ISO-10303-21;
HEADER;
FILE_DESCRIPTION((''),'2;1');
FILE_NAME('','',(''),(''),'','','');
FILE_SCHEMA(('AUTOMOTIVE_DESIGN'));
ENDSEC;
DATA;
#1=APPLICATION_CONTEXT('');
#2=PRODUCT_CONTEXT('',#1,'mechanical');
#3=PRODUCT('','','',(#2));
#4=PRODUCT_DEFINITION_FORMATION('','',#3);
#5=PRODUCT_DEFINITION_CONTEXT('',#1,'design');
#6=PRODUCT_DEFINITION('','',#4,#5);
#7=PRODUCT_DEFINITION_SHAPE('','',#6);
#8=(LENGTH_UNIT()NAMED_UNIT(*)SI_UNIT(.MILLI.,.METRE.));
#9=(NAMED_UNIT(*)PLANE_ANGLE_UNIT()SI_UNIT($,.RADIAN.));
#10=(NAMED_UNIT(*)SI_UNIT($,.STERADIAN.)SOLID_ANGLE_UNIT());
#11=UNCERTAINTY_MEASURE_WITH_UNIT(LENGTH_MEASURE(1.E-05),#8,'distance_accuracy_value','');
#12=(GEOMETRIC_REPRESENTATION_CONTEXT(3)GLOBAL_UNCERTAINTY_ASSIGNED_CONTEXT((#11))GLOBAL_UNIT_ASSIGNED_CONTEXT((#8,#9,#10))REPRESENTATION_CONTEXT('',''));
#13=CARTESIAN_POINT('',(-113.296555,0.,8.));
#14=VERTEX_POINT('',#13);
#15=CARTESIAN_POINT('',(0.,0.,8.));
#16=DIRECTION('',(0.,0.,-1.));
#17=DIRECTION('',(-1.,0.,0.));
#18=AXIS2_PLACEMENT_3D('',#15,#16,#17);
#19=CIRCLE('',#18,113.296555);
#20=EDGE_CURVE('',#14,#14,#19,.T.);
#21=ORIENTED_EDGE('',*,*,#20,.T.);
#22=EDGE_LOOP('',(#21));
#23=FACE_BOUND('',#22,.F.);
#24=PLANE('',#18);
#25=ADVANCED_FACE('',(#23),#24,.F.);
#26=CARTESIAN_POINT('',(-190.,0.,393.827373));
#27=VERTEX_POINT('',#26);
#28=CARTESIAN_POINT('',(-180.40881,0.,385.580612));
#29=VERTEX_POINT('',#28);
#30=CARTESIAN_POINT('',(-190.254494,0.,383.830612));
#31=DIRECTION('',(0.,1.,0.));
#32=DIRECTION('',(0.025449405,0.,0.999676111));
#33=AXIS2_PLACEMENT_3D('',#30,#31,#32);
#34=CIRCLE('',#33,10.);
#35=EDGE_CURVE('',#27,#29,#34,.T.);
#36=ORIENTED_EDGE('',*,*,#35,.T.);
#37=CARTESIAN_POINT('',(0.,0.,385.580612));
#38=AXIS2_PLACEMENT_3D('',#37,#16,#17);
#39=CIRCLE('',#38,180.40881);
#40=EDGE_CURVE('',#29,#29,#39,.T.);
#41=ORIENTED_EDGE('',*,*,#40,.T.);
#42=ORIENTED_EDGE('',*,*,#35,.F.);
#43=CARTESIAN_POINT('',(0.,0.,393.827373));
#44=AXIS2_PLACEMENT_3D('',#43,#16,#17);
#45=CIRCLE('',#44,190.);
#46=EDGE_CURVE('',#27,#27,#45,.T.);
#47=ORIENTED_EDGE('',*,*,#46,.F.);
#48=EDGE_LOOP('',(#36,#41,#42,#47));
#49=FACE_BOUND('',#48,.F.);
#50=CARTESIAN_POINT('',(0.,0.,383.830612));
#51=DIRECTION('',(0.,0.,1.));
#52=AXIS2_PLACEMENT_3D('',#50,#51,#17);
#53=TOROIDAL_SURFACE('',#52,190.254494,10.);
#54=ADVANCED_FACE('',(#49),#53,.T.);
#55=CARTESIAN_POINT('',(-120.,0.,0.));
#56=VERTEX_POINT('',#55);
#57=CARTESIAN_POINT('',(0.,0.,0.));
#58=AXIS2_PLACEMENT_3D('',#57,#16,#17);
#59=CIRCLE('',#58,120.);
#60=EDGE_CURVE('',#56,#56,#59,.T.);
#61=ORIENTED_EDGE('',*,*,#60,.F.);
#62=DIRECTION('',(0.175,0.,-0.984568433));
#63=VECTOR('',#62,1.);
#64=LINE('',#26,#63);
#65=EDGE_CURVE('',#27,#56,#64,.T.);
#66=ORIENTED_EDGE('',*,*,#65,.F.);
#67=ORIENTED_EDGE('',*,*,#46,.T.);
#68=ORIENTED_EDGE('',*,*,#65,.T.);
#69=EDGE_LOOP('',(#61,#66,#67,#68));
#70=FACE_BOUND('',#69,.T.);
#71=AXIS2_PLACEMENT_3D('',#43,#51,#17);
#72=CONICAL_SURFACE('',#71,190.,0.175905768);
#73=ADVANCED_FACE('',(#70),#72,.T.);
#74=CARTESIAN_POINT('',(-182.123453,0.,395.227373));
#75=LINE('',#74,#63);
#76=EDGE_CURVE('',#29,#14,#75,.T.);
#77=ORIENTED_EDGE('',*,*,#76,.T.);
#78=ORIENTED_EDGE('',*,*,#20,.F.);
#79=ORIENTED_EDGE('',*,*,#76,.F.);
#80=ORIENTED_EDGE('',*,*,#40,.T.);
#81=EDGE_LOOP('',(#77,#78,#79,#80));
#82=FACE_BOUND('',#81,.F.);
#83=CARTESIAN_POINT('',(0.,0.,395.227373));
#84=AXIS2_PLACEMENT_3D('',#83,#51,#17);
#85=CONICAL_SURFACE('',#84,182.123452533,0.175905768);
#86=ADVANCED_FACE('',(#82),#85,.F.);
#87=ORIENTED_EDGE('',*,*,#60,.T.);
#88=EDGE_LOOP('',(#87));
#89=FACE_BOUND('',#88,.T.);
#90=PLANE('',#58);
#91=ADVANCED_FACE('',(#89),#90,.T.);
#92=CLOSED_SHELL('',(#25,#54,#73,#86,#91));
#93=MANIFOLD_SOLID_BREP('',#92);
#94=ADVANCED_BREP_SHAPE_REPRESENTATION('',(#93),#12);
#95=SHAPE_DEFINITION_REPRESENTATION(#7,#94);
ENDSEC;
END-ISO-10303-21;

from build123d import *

# Parameters (mm, degrees)
F2_T = -8


# Not quite as in the source:
# - a fillet or chamfer that OpenCascade refuses, or shapes differently, is made with other operations: its cross-section is extruded or revolved along the edge and cut away or added


with BuildPart() as f1:
    # F0 (on Front) → F1 (revolve)
    with BuildSketch(Plane.XZ):
        Polygon((-120, 0), (0, 0), (0, 393.8273733503), (-190, 393.8273733503), align=None)
    revolve(axis=Axis((0, 0, 196.9136866752), (0, 0, -1)))

    # F2
    f2_openings = [f1.faces().sort_by_distance(p)[0] for p in [
        (0, 0, 393.827373),
    ]]
    offset(amount=F2_T, openings=f2_openings)

    # F3: fillet of radius 10 on 1 edges, made by hand

    # F3_s1 → F3_t2 (revolve, cut)
    with BuildSketch(Plane.XZ):
        with BuildLine():
            ThreePointArc((-190, 393.8273733503), (-183.7348569365, 391.4131139305), (-180.408809713, 385.5806122358))
            Line((-180.408809713, 385.5806122358), (-181.8746125421, 393.8273733503))
            Line((-181.8746125421, 393.8273733503), (-190, 393.8273733503))
        make_face()
    revolve(axis=Axis((0, 0, 393.8273733503), (0, 0, -1)), mode=Mode.SUBTRACT)


solid = f1.part
